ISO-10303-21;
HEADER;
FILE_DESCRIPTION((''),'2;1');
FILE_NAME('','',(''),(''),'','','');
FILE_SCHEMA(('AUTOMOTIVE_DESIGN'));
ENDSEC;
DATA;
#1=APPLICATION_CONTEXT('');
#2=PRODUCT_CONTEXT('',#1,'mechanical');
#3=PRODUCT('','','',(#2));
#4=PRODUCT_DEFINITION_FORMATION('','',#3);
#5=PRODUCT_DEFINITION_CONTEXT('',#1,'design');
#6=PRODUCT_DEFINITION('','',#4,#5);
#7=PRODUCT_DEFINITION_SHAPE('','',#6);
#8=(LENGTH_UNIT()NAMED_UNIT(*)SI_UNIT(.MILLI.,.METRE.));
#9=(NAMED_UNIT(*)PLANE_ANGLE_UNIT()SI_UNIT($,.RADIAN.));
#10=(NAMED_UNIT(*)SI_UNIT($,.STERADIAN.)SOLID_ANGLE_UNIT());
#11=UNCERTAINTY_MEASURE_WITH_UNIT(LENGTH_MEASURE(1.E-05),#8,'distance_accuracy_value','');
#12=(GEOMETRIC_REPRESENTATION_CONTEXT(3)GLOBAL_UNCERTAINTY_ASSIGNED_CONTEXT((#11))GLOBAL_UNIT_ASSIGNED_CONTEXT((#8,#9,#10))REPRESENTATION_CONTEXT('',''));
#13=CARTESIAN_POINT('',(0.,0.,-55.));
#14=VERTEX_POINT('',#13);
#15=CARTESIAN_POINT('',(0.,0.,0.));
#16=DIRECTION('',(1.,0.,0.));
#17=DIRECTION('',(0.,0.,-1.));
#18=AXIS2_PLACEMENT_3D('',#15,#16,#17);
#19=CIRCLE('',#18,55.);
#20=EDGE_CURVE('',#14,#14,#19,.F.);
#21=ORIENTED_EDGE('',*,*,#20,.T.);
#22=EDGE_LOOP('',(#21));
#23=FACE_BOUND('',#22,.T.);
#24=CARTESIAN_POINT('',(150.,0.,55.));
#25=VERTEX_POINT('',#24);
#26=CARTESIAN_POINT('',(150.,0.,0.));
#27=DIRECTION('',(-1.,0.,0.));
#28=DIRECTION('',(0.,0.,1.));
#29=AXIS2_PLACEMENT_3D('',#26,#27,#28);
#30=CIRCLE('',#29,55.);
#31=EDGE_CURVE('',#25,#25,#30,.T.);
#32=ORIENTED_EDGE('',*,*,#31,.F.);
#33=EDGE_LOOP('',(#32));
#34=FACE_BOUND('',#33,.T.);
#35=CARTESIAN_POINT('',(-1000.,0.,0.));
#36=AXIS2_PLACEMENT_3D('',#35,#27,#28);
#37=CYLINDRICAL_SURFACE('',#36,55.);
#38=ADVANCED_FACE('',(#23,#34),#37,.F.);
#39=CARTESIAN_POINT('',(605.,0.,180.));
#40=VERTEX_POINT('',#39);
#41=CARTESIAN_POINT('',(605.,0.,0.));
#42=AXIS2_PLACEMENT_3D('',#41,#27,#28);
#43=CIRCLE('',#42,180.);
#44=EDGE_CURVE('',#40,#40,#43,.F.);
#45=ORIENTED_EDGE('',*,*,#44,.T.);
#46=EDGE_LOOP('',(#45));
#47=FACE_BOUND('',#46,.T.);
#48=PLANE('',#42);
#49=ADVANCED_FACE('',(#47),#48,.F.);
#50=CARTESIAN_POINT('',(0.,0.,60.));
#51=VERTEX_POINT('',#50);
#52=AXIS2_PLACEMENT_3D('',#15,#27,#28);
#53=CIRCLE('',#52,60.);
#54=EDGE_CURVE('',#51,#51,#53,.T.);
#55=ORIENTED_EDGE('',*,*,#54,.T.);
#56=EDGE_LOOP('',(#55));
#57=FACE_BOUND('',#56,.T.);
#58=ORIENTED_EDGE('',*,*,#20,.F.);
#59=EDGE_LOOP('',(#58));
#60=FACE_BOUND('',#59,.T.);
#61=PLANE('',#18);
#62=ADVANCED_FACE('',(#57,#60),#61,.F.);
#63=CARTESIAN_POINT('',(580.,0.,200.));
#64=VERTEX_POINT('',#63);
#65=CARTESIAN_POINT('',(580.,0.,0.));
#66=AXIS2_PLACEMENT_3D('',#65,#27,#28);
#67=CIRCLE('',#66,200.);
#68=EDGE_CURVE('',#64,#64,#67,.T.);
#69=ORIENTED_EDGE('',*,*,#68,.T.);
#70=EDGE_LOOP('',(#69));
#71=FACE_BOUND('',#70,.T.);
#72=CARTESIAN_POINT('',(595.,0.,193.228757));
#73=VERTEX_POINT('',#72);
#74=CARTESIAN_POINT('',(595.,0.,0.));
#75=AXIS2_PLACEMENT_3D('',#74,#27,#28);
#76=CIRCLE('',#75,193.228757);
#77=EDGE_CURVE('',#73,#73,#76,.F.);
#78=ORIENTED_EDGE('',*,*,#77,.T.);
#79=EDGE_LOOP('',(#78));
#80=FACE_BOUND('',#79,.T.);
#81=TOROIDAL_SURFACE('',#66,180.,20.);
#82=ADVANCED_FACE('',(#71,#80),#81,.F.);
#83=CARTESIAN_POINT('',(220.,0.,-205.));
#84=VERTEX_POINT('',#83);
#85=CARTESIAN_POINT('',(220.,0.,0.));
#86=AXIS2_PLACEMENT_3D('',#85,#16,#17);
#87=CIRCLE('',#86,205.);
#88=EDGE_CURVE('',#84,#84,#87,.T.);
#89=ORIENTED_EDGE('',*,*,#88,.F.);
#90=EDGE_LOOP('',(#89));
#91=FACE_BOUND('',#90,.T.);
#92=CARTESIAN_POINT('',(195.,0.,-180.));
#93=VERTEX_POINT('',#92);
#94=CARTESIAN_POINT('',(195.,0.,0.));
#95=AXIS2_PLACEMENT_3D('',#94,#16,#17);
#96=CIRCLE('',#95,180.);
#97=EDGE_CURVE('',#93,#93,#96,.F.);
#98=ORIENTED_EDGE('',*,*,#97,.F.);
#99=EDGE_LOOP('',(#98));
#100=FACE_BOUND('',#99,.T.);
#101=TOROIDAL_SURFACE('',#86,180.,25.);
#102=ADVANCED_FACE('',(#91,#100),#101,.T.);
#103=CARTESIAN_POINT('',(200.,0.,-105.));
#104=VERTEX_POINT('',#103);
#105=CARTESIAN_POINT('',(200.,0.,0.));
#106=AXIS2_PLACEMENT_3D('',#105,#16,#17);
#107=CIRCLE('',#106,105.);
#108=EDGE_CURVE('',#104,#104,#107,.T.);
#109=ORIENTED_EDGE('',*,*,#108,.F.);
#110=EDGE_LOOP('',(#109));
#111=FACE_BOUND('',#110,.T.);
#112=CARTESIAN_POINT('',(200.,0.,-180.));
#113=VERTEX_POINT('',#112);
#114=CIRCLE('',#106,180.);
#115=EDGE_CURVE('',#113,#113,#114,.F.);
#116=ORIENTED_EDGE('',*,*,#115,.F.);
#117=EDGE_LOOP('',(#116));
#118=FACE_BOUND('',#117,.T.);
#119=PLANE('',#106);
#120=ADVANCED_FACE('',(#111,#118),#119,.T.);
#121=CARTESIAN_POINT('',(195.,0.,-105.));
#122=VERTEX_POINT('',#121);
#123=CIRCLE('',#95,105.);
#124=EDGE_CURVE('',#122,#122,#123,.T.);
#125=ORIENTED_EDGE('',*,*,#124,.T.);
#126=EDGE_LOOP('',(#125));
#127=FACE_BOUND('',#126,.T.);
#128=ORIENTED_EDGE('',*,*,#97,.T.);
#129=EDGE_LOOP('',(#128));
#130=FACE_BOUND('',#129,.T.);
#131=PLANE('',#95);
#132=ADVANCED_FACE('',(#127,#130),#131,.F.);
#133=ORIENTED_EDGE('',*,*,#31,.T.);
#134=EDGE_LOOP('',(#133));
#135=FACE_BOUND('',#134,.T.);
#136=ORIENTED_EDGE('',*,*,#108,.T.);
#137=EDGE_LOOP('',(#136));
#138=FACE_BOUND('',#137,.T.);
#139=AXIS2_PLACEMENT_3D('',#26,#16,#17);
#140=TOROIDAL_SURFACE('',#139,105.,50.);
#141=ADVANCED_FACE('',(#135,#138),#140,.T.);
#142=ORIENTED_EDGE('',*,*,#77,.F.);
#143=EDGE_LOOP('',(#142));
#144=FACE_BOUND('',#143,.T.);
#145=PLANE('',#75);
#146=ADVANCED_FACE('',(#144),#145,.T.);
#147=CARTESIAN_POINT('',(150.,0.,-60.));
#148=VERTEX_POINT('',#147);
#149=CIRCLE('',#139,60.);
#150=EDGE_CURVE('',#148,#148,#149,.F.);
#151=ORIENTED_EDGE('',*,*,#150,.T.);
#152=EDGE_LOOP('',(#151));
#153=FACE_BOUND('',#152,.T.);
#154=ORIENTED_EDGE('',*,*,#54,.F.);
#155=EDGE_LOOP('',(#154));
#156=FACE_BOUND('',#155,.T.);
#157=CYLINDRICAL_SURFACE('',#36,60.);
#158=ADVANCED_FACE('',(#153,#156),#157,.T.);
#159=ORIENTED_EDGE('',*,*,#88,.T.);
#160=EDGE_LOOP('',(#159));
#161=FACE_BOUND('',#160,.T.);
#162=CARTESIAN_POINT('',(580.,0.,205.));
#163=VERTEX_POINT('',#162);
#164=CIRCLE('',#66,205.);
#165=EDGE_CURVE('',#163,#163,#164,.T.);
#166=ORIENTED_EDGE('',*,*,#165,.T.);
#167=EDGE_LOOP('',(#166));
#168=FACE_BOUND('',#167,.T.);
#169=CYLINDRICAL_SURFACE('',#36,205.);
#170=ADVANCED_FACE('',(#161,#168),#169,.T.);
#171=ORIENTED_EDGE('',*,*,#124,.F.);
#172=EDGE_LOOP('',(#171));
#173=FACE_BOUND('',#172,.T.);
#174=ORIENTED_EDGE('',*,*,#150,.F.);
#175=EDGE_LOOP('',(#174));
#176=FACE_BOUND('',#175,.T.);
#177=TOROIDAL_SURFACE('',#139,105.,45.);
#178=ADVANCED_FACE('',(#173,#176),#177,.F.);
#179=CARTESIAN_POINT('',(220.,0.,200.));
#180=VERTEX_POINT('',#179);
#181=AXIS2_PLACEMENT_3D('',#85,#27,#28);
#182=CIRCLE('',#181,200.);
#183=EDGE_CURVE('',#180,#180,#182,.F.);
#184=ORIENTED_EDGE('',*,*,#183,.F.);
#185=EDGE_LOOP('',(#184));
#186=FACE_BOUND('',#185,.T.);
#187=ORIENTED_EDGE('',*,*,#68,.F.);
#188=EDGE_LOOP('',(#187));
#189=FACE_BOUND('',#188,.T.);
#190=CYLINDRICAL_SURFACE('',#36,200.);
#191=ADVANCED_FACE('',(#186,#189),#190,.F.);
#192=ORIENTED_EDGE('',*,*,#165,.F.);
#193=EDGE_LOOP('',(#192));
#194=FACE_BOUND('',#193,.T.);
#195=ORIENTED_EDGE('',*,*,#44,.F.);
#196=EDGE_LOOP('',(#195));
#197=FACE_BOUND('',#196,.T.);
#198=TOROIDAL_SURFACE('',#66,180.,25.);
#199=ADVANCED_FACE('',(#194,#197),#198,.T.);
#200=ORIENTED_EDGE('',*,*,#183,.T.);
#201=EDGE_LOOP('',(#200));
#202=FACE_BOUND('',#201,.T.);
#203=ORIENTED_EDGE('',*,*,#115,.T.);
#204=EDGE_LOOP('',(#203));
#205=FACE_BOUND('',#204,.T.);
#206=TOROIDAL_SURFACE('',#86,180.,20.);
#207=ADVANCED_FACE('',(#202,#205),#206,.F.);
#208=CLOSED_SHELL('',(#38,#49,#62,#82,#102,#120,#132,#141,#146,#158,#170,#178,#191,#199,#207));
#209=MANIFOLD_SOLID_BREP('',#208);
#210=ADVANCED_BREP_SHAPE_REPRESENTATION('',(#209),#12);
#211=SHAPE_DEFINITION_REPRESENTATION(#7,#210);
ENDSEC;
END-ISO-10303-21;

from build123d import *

# Parameters (mm, degrees)
FILLET4_R = 45
FILLET5_R = 25


# Read off the part's stored shape, not the designer's step: Shell3
with BuildPart() as part:
    # Sketch1 → Revolve2 (revolve)
    with BuildSketch(Plane(origin=(0, 0, 0), x_dir=(1, 0, 0), z_dir=(0, 1, 0)), mode=Mode.PRIVATE) as revolve2_sk:
        Polygon((195, 60), (0, 60), (0, 0), (605, 0), (605, 205), (195, 205), align=None)
    revolve(revolve2_sk.sketch.rotate(Axis((-1000, 0, 0), (1, 0, 0)), 180), axis=Axis((-1000, 0, 0), (1, 0, 0)))

    # Fillet4
    fillet4_edges = [part.edges().sort_by_distance(p)[0] for p in [
        (195, 0, -60),
    ]]
    fillet(fillet4_edges, radius=FILLET4_R)

    # Fillet5
    fillet5_edges = [part.edges().sort_by_distance(p)[0] for p in [
        (195, 0, -205),
        (605, 0, -205),
    ]]
    fillet(fillet5_edges, radius=FILLET5_R)

    # Shell3 outline → Shell3 (revolve, cut)
    with BuildSketch(Plane.YX):
        with BuildLine():
            Line((0, 595), (0, 0))
            Line((0, 0), (55, 0))
            Line((55, 0), (55, 150))
            ThreePointArc((55, 150), (69.644660941, 185.355339059), (105, 200))
            Line((105, 200), (180, 200))
            ThreePointArc((180, 200), (194.142135624, 205.857864376), (200, 220))
            Line((200, 220), (200, 580))
            ThreePointArc((200, 580), (198.228756555, 588.228756555), (193.228756555, 595))
            Line((193.228756555, 595), (0, 595))
        make_face()
    revolve(axis=Axis((0, 0, 0), (1, 0, 0)), mode=Mode.SUBTRACT)


solid = part.part
